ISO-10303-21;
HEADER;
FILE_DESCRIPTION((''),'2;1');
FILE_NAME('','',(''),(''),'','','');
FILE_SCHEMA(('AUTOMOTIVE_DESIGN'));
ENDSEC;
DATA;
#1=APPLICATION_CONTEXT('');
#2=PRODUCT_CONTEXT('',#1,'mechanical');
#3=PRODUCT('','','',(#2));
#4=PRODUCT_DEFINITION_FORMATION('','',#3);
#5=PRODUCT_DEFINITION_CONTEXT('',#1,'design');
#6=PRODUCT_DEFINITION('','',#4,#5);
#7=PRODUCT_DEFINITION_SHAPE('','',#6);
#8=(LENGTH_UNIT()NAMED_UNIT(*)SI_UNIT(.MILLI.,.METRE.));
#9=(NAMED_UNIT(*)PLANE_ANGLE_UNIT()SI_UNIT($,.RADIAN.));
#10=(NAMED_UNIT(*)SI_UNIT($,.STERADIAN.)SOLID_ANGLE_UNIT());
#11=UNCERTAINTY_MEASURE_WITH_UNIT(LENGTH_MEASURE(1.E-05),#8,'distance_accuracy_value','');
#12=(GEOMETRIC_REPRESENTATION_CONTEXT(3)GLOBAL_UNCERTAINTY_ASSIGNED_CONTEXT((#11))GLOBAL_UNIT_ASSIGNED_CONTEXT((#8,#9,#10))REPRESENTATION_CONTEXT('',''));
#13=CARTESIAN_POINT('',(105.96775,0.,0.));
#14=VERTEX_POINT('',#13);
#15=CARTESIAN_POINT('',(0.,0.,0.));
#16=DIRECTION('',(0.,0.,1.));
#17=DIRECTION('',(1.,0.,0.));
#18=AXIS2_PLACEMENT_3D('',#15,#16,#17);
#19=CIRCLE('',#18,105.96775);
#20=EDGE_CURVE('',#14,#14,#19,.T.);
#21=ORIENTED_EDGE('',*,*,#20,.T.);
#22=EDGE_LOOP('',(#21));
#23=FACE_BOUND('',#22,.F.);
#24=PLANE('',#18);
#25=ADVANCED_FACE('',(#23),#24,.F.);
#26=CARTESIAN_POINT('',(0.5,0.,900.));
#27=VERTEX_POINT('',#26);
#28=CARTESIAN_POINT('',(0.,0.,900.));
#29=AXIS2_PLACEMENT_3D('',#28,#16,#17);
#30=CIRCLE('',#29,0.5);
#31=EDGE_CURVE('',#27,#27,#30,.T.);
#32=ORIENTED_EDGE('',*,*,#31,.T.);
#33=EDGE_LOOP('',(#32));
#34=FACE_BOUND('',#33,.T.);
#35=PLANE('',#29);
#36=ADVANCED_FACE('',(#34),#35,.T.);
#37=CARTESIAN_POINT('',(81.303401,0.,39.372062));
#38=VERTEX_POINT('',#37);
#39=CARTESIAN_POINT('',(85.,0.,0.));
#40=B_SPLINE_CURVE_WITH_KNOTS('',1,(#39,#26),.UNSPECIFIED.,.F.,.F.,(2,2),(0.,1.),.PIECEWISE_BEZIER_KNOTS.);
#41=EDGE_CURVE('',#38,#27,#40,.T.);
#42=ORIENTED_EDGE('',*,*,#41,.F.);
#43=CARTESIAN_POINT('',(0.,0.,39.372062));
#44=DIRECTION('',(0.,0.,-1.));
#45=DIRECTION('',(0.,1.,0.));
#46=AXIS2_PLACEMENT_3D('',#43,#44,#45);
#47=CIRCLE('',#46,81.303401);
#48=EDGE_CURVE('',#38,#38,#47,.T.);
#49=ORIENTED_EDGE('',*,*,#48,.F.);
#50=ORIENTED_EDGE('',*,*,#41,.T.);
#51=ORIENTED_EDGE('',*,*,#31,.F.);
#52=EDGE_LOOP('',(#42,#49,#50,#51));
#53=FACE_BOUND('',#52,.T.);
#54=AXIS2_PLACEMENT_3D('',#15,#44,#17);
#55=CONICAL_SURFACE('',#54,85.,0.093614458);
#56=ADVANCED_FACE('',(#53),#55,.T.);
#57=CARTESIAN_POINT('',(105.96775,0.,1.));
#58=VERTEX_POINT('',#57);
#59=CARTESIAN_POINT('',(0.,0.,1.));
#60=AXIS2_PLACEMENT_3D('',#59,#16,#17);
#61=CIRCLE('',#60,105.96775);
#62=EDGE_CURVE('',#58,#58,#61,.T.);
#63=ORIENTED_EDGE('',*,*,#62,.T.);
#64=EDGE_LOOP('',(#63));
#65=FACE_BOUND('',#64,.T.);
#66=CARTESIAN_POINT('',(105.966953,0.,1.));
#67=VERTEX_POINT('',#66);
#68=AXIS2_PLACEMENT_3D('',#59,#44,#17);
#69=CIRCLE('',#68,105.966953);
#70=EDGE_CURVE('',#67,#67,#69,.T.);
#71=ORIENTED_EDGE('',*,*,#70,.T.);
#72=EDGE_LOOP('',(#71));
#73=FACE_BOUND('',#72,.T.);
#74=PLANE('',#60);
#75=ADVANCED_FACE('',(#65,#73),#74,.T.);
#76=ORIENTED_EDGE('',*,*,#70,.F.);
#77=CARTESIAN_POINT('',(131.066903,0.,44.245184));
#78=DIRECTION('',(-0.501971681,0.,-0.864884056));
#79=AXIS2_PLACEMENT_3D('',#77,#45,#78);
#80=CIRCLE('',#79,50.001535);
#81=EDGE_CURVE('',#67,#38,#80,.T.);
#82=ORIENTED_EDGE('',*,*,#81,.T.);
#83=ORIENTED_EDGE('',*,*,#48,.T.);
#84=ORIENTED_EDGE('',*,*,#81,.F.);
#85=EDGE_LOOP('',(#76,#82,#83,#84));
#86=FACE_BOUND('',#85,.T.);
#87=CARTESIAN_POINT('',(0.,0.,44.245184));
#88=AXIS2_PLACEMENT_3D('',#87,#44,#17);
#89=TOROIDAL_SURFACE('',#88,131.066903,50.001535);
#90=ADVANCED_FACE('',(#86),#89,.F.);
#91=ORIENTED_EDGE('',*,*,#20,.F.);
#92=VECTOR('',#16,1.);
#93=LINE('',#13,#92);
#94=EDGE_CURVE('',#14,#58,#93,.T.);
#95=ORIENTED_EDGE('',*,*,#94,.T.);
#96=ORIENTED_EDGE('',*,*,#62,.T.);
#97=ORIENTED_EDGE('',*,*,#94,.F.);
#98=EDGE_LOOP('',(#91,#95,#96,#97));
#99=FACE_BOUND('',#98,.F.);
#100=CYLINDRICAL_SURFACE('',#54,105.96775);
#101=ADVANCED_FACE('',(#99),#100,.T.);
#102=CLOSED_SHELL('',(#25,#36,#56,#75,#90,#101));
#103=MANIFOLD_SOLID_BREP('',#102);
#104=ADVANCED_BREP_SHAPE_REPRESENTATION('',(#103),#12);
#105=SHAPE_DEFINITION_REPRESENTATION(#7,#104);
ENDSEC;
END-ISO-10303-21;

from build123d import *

# Parameters (mm, degrees)
F0_R     = 85
F2_R     = 0.5
F4_R     = 105.9677495378
F5_DEPTH = 1


# Not quite as in the source:
# - a fillet or chamfer that OpenCascade refuses, or shapes differently, is made with other operations: its cross-section is extruded or revolved along the edge and cut away or added


with BuildPart() as f3:
    # F0 (on Top) → F3 section 0
    with BuildSketch(Plane.XY):
        Circle(F0_R)
    # F2 (on offset) → F3 section 1
    with BuildSketch(Plane.XY.offset(900)):
        Circle(F2_R)
    loft()

    # F4 (on Top) → F5 (join)
    with BuildSketch(Plane.XY):
        Circle(F4_R)
    extrude(amount=F5_DEPTH)

    # F6: fillet of radius 50 on 1 edges, made by hand


with BuildPart() as f6_tool2:
    # F6_s3 → F6_t4 (revolve)
    with BuildSketch(Plane.XZ):
        with BuildLine():
            ThreePointArc((105.9675487491, 0.9996540464), (88.9507928559, 17.2936216176), (81.2843067656, 39.5711518076))
            Line((81.2843067656, 39.5711518076), (76.3060471064, 39.1037485396))
            ThreePointArc((76.3060471064, 39.1037485396), (78.1171484035, 19.8181913314), (79.927851452, 0.532596732))
            Line((79.927851452, 0.532596732), (84.9061111111, -4.0001535025))
            ThreePointArc((84.9061111111, -4.0001535025), (95.4368299301, -4.0001535025), (103.4576132883, -3.3248989977))
            Line((103.4576132883, -3.3248989977), (105.9675487491, 0.9996540464))
        make_face()
    revolve(axis=Axis((0, 0, 1), (0, 0, 1)))

    split(bisect_by=Plane.XY, keep=Keep.TOP)


with BuildPart() as f3_1:
    add(f3.part)

    # F6_t1: union F6_tool2
    add(f6_tool2.part)


solid = f3_1.part
